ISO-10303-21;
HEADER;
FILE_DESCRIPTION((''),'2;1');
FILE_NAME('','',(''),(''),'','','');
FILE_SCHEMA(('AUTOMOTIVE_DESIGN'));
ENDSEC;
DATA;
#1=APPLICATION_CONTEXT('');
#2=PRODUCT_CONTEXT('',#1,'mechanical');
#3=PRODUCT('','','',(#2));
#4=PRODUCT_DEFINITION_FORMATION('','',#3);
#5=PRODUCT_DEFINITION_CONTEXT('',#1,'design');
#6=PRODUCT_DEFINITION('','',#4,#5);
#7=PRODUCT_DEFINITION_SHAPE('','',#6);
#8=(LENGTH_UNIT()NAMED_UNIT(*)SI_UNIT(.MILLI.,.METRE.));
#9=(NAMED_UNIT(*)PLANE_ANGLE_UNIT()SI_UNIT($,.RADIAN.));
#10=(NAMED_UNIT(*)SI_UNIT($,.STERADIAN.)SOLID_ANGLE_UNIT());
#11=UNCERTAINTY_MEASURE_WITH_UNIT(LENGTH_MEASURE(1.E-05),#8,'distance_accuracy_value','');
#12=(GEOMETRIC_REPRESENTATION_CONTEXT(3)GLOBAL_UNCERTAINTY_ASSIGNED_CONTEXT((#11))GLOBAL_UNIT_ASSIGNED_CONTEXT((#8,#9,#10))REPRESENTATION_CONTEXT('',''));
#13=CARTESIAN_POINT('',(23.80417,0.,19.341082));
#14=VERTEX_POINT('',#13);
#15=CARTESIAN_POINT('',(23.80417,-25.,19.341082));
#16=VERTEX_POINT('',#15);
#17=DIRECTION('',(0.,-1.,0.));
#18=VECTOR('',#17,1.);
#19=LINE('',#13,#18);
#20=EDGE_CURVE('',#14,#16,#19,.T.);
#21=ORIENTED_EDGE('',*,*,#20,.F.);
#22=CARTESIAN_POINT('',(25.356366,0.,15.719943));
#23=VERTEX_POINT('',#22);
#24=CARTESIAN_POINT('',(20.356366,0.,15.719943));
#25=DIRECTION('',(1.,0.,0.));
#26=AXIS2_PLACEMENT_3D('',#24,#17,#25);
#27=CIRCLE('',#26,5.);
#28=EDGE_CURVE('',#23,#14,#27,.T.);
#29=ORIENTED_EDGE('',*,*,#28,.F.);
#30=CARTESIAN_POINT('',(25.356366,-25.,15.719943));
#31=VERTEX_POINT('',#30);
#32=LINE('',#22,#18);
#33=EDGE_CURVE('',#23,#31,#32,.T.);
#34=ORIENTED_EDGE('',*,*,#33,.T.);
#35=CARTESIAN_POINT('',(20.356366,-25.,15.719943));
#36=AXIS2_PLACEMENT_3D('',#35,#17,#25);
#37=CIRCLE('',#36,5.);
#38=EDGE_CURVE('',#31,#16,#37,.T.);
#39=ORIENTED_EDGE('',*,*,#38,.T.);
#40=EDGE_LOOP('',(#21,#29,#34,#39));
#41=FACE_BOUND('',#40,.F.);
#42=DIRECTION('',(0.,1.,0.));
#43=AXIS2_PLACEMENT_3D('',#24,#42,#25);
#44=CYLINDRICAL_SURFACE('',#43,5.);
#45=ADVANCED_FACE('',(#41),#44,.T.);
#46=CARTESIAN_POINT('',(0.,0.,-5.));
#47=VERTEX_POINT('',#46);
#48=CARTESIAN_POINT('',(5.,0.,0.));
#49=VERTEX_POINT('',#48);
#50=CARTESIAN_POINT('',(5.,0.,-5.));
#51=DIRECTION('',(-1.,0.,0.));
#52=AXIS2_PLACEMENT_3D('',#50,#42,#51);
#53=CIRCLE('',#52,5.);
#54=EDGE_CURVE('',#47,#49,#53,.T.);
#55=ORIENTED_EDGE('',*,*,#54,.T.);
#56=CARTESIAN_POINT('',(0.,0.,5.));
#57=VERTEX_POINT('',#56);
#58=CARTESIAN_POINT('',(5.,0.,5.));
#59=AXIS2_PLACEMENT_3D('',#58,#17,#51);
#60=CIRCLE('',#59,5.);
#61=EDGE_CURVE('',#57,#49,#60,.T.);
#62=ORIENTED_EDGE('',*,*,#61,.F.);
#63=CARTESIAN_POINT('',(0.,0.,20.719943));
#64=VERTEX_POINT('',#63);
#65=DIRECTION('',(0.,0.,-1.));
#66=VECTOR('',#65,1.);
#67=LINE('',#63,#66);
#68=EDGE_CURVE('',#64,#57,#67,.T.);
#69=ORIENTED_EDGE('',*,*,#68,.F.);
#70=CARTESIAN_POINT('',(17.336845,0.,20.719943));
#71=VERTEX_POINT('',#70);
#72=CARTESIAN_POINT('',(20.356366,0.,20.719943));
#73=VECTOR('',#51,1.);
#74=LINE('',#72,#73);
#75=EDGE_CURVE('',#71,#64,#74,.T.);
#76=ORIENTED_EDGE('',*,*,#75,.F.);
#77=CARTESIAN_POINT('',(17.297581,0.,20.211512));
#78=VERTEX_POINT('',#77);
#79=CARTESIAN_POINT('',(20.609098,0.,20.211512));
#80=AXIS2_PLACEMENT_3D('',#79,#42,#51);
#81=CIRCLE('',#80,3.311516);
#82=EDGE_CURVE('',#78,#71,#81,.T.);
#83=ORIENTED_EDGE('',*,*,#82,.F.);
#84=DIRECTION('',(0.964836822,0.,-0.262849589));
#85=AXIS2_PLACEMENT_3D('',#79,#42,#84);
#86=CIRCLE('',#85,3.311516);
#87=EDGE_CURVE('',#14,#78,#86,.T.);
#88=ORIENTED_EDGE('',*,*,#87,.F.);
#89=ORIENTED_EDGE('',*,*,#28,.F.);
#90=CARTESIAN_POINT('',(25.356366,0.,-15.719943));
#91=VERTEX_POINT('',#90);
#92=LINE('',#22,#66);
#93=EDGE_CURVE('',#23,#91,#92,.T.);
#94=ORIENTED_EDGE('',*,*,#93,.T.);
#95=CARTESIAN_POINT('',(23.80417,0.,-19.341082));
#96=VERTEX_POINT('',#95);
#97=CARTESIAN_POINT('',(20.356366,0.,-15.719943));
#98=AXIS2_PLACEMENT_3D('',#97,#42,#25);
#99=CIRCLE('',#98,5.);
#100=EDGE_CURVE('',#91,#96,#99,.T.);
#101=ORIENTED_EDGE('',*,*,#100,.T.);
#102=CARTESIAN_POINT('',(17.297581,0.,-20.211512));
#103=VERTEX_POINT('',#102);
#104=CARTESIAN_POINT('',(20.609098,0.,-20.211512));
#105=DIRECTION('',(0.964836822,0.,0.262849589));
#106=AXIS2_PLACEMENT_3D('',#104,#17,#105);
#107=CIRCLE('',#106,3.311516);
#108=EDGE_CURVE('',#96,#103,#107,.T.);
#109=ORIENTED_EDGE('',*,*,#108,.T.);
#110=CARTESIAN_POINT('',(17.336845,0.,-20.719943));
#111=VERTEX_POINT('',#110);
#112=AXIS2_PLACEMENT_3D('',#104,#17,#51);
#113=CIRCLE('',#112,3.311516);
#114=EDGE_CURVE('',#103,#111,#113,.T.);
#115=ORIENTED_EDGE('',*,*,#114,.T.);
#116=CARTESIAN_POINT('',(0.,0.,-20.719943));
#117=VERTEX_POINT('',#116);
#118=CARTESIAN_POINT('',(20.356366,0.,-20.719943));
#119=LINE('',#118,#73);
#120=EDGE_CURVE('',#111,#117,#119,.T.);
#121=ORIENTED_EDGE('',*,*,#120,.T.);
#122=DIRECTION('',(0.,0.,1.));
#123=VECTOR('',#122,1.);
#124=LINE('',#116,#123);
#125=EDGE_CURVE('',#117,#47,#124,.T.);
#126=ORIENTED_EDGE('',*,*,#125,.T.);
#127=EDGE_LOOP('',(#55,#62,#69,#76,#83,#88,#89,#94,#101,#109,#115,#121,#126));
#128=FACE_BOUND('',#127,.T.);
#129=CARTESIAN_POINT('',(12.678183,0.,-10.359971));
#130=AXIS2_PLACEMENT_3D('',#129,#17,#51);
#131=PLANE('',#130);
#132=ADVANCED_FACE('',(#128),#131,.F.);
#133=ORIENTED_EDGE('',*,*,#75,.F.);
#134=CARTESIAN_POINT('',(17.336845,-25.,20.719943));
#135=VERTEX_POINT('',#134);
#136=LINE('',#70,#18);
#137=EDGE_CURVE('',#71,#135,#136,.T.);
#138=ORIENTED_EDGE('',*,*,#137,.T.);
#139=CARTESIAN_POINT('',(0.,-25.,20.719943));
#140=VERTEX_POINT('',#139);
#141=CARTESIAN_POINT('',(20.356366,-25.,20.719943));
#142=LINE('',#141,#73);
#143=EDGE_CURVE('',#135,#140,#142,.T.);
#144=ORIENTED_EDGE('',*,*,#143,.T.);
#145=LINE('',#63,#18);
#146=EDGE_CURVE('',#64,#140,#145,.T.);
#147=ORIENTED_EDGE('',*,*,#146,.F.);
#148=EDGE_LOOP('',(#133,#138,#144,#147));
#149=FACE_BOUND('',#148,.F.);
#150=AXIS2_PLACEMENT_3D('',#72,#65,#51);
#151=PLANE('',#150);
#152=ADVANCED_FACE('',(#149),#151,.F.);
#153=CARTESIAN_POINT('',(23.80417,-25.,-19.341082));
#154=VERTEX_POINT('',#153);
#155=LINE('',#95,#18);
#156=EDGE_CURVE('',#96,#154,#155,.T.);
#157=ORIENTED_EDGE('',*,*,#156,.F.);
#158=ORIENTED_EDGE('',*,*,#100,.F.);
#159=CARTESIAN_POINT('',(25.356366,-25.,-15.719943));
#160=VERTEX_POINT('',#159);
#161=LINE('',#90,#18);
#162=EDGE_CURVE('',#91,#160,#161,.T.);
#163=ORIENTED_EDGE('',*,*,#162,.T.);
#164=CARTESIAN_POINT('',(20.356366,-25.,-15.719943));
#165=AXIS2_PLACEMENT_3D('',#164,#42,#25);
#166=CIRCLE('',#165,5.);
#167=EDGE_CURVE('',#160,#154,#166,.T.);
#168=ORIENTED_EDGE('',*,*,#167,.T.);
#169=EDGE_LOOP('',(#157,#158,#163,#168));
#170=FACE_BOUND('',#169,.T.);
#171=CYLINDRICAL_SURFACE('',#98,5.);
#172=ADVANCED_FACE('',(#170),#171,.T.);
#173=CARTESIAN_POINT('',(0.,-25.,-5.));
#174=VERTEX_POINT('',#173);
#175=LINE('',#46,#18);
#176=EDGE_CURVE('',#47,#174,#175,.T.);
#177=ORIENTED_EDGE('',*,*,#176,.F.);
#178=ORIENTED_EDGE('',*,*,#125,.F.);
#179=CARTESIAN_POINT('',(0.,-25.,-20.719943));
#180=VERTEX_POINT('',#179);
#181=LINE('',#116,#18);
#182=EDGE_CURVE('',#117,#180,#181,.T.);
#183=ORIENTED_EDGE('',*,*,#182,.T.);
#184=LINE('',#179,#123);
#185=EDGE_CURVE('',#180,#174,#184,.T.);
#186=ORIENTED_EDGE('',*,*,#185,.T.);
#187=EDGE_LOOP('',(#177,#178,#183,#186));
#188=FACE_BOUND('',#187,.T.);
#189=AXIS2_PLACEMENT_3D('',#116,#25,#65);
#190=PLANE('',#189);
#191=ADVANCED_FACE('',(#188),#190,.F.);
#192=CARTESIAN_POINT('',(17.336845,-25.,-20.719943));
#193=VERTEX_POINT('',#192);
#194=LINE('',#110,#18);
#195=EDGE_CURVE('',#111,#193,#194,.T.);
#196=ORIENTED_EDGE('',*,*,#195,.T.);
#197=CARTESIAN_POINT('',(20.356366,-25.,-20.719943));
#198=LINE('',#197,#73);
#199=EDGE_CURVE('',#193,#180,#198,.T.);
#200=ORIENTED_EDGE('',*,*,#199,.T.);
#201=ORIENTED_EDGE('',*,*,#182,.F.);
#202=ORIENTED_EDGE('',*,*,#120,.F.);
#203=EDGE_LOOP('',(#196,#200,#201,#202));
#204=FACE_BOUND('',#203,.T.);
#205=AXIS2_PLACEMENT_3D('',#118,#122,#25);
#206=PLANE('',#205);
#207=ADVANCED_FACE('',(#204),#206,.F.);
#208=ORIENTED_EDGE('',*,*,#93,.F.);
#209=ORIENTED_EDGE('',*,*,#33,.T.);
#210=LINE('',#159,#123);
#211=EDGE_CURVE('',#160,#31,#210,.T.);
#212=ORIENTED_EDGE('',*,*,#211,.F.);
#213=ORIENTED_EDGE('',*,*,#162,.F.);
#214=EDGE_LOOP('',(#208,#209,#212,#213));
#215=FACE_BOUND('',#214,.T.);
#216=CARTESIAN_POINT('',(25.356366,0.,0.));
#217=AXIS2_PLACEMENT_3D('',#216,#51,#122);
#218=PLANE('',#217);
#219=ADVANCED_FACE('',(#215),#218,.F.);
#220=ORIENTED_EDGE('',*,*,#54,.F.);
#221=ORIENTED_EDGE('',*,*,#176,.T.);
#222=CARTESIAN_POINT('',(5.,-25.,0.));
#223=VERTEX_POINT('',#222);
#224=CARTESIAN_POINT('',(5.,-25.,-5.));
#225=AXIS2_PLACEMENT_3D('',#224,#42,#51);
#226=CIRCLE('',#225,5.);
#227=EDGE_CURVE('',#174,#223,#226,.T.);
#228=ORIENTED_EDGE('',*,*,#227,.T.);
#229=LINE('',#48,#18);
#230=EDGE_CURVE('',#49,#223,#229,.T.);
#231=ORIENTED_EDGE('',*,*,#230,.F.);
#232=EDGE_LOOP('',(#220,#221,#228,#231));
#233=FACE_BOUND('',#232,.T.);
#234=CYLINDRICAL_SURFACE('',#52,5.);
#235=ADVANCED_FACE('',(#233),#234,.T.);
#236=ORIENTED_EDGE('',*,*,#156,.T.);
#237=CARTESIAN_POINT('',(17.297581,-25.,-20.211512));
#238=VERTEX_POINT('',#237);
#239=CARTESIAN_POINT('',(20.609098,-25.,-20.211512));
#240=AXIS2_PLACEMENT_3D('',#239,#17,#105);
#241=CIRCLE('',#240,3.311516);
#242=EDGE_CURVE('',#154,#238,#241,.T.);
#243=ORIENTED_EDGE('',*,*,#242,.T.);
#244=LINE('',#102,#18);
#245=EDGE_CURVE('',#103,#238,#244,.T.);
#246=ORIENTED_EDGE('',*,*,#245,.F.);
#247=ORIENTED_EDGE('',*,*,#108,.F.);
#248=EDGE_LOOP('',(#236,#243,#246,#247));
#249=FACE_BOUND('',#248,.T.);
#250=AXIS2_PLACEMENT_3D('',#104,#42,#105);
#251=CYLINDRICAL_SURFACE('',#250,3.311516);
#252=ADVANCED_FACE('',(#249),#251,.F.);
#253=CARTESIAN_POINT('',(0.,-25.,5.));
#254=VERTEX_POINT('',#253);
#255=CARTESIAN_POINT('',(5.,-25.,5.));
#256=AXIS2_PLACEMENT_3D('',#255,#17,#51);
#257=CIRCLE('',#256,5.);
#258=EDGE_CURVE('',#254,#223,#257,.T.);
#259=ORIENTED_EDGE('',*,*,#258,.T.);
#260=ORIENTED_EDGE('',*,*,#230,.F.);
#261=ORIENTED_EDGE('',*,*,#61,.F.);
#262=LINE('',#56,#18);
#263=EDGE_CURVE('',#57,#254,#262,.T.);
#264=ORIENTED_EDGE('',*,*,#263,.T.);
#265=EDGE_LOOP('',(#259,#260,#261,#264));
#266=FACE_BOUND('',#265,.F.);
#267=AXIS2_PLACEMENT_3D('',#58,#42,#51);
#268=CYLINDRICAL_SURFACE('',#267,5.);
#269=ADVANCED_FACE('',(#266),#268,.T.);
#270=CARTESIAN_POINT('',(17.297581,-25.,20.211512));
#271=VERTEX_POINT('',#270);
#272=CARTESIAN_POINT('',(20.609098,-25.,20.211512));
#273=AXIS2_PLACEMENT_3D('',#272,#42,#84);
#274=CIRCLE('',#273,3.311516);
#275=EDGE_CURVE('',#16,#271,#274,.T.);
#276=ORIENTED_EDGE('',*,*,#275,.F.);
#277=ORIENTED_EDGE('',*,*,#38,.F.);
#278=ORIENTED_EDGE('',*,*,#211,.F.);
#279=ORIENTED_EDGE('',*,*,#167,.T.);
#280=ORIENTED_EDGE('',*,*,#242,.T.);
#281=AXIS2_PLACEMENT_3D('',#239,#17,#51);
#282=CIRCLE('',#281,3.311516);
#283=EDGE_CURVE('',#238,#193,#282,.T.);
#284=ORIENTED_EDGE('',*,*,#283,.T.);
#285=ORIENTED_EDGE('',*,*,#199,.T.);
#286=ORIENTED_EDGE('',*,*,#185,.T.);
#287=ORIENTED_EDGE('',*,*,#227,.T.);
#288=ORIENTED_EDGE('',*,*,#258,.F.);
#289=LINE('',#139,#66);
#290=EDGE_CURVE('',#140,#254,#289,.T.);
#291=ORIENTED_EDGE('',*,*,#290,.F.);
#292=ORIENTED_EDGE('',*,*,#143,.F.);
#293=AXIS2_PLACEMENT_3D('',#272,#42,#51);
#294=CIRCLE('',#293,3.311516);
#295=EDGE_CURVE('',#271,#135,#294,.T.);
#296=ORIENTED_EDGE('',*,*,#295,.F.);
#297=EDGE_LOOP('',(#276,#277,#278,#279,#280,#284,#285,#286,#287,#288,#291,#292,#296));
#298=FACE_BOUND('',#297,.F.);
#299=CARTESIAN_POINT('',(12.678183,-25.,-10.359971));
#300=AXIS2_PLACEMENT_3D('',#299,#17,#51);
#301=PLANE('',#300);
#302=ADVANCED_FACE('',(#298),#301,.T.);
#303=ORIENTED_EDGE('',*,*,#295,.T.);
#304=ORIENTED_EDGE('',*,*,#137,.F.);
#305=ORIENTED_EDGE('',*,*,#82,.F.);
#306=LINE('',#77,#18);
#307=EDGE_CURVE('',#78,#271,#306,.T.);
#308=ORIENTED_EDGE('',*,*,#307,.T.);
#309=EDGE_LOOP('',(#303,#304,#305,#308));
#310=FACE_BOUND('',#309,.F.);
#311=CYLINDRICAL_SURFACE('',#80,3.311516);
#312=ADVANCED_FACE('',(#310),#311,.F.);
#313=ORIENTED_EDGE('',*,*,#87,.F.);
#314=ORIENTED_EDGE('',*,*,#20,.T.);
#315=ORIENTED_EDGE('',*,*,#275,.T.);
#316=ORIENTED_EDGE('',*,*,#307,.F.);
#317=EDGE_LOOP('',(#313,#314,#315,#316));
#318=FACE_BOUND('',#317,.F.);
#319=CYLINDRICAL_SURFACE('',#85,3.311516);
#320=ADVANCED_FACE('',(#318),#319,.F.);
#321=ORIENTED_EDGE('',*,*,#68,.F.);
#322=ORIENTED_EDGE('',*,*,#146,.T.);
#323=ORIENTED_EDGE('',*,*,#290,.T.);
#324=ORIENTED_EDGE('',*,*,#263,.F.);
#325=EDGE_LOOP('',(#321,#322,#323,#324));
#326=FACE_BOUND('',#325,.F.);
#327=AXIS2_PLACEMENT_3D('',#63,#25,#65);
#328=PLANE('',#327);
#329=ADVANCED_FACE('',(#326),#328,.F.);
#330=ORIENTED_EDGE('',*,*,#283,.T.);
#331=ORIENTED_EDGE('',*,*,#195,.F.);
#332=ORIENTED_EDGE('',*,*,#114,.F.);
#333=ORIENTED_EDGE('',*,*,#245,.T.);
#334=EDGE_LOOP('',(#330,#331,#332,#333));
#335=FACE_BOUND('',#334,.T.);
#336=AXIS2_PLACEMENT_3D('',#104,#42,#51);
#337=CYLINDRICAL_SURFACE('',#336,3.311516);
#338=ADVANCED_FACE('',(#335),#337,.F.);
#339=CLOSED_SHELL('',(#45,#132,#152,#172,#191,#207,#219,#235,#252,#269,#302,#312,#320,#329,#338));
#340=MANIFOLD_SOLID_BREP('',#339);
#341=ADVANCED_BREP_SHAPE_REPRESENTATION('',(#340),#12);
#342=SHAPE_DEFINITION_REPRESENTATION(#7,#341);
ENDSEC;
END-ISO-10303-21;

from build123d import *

# Parameters (mm, degrees)
F1_DEPTH = 25
F4_DEPTH = 25


# Not quite as in the source:
# - a pattern or mirror of a feature is missing from the dataset's text; its kind, count and spacing are read off the source's solid


with BuildPart() as f1:
    # F0 (on Front) → F1 (new body)
    with BuildSketch(Plane.XZ):
        with BuildLine():
            ThreePointArc((0, 5), (1.4644660941, 1.4644660941), (5, 0))
            Line((5, 0), (25.3563662991, 0))
            Line((25.3563662991, 0), (25.3563662991, 15.7199426368))
            ThreePointArc((25.3563662991, 15.7199426368), (23.891900205, 19.2554765427), (20.3563662991, 20.7199426368))
            Line((20.3563662991, 20.7199426368), (0, 20.7199426368))
            Line((0, 20.7199426368), (0, 5))
        make_face()
    extrude(amount=F1_DEPTH)

    # F2: F1 across face


with BuildPart() as f1_1:
    add(f1.part)
    add(f1.part.mirror(Plane(origin=(15.1781831495, -12.5, 0), x_dir=(1, 0, 0), z_dir=(0, 0, -1))))

    # F3 (on face) → F4 (cut)
    with BuildSketch(Plane(origin=(0, 0, 0), x_dir=(-1, 0, 0), z_dir=(0, 1, 0))):
        with BuildLine():
            Line((-20.3563662991, 20.7199426368), (-17.3368447248, 20.7199426368))
            ThreePointArc((-17.3368447248, 20.7199426368), (-21.2996072768, 23.4502367244), (-23.8041703997, 19.34108153))
            ThreePointArc((-23.8041703997, 19.34108153), (-22.2130172536, 20.3624470507), (-20.3563662991, 20.7199426368))
        make_face()
        with BuildLine():
            ThreePointArc((-23.8041703997, 19.34108153), (-20.1700051206, 16.929235893), (-17.2975812754, 20.2115122229))
            ThreePointArc((-17.2975812754, 20.2115122229), (-17.3074117289, 20.4664843313), (-17.3368447248, 20.7199426368))
            Line((-17.3368447248, 20.7199426368), (-20.3563662991, 20.7199426368))
            ThreePointArc((-20.3563662991, 20.7199426368), (-22.2130172536, 20.3624470507), (-23.8041703997, 19.34108153))
        make_face()
    f4 = extrude(amount=-F4_DEPTH, mode=Mode.SUBTRACT)

    # F4_copies: F4 across plane
    add(f4.mirror(Plane(origin=(0, 0, 0), x_dir=(-1, 0, 0), z_dir=(0, 0, -1))), mode=Mode.SUBTRACT)


solid = f1_1.part
